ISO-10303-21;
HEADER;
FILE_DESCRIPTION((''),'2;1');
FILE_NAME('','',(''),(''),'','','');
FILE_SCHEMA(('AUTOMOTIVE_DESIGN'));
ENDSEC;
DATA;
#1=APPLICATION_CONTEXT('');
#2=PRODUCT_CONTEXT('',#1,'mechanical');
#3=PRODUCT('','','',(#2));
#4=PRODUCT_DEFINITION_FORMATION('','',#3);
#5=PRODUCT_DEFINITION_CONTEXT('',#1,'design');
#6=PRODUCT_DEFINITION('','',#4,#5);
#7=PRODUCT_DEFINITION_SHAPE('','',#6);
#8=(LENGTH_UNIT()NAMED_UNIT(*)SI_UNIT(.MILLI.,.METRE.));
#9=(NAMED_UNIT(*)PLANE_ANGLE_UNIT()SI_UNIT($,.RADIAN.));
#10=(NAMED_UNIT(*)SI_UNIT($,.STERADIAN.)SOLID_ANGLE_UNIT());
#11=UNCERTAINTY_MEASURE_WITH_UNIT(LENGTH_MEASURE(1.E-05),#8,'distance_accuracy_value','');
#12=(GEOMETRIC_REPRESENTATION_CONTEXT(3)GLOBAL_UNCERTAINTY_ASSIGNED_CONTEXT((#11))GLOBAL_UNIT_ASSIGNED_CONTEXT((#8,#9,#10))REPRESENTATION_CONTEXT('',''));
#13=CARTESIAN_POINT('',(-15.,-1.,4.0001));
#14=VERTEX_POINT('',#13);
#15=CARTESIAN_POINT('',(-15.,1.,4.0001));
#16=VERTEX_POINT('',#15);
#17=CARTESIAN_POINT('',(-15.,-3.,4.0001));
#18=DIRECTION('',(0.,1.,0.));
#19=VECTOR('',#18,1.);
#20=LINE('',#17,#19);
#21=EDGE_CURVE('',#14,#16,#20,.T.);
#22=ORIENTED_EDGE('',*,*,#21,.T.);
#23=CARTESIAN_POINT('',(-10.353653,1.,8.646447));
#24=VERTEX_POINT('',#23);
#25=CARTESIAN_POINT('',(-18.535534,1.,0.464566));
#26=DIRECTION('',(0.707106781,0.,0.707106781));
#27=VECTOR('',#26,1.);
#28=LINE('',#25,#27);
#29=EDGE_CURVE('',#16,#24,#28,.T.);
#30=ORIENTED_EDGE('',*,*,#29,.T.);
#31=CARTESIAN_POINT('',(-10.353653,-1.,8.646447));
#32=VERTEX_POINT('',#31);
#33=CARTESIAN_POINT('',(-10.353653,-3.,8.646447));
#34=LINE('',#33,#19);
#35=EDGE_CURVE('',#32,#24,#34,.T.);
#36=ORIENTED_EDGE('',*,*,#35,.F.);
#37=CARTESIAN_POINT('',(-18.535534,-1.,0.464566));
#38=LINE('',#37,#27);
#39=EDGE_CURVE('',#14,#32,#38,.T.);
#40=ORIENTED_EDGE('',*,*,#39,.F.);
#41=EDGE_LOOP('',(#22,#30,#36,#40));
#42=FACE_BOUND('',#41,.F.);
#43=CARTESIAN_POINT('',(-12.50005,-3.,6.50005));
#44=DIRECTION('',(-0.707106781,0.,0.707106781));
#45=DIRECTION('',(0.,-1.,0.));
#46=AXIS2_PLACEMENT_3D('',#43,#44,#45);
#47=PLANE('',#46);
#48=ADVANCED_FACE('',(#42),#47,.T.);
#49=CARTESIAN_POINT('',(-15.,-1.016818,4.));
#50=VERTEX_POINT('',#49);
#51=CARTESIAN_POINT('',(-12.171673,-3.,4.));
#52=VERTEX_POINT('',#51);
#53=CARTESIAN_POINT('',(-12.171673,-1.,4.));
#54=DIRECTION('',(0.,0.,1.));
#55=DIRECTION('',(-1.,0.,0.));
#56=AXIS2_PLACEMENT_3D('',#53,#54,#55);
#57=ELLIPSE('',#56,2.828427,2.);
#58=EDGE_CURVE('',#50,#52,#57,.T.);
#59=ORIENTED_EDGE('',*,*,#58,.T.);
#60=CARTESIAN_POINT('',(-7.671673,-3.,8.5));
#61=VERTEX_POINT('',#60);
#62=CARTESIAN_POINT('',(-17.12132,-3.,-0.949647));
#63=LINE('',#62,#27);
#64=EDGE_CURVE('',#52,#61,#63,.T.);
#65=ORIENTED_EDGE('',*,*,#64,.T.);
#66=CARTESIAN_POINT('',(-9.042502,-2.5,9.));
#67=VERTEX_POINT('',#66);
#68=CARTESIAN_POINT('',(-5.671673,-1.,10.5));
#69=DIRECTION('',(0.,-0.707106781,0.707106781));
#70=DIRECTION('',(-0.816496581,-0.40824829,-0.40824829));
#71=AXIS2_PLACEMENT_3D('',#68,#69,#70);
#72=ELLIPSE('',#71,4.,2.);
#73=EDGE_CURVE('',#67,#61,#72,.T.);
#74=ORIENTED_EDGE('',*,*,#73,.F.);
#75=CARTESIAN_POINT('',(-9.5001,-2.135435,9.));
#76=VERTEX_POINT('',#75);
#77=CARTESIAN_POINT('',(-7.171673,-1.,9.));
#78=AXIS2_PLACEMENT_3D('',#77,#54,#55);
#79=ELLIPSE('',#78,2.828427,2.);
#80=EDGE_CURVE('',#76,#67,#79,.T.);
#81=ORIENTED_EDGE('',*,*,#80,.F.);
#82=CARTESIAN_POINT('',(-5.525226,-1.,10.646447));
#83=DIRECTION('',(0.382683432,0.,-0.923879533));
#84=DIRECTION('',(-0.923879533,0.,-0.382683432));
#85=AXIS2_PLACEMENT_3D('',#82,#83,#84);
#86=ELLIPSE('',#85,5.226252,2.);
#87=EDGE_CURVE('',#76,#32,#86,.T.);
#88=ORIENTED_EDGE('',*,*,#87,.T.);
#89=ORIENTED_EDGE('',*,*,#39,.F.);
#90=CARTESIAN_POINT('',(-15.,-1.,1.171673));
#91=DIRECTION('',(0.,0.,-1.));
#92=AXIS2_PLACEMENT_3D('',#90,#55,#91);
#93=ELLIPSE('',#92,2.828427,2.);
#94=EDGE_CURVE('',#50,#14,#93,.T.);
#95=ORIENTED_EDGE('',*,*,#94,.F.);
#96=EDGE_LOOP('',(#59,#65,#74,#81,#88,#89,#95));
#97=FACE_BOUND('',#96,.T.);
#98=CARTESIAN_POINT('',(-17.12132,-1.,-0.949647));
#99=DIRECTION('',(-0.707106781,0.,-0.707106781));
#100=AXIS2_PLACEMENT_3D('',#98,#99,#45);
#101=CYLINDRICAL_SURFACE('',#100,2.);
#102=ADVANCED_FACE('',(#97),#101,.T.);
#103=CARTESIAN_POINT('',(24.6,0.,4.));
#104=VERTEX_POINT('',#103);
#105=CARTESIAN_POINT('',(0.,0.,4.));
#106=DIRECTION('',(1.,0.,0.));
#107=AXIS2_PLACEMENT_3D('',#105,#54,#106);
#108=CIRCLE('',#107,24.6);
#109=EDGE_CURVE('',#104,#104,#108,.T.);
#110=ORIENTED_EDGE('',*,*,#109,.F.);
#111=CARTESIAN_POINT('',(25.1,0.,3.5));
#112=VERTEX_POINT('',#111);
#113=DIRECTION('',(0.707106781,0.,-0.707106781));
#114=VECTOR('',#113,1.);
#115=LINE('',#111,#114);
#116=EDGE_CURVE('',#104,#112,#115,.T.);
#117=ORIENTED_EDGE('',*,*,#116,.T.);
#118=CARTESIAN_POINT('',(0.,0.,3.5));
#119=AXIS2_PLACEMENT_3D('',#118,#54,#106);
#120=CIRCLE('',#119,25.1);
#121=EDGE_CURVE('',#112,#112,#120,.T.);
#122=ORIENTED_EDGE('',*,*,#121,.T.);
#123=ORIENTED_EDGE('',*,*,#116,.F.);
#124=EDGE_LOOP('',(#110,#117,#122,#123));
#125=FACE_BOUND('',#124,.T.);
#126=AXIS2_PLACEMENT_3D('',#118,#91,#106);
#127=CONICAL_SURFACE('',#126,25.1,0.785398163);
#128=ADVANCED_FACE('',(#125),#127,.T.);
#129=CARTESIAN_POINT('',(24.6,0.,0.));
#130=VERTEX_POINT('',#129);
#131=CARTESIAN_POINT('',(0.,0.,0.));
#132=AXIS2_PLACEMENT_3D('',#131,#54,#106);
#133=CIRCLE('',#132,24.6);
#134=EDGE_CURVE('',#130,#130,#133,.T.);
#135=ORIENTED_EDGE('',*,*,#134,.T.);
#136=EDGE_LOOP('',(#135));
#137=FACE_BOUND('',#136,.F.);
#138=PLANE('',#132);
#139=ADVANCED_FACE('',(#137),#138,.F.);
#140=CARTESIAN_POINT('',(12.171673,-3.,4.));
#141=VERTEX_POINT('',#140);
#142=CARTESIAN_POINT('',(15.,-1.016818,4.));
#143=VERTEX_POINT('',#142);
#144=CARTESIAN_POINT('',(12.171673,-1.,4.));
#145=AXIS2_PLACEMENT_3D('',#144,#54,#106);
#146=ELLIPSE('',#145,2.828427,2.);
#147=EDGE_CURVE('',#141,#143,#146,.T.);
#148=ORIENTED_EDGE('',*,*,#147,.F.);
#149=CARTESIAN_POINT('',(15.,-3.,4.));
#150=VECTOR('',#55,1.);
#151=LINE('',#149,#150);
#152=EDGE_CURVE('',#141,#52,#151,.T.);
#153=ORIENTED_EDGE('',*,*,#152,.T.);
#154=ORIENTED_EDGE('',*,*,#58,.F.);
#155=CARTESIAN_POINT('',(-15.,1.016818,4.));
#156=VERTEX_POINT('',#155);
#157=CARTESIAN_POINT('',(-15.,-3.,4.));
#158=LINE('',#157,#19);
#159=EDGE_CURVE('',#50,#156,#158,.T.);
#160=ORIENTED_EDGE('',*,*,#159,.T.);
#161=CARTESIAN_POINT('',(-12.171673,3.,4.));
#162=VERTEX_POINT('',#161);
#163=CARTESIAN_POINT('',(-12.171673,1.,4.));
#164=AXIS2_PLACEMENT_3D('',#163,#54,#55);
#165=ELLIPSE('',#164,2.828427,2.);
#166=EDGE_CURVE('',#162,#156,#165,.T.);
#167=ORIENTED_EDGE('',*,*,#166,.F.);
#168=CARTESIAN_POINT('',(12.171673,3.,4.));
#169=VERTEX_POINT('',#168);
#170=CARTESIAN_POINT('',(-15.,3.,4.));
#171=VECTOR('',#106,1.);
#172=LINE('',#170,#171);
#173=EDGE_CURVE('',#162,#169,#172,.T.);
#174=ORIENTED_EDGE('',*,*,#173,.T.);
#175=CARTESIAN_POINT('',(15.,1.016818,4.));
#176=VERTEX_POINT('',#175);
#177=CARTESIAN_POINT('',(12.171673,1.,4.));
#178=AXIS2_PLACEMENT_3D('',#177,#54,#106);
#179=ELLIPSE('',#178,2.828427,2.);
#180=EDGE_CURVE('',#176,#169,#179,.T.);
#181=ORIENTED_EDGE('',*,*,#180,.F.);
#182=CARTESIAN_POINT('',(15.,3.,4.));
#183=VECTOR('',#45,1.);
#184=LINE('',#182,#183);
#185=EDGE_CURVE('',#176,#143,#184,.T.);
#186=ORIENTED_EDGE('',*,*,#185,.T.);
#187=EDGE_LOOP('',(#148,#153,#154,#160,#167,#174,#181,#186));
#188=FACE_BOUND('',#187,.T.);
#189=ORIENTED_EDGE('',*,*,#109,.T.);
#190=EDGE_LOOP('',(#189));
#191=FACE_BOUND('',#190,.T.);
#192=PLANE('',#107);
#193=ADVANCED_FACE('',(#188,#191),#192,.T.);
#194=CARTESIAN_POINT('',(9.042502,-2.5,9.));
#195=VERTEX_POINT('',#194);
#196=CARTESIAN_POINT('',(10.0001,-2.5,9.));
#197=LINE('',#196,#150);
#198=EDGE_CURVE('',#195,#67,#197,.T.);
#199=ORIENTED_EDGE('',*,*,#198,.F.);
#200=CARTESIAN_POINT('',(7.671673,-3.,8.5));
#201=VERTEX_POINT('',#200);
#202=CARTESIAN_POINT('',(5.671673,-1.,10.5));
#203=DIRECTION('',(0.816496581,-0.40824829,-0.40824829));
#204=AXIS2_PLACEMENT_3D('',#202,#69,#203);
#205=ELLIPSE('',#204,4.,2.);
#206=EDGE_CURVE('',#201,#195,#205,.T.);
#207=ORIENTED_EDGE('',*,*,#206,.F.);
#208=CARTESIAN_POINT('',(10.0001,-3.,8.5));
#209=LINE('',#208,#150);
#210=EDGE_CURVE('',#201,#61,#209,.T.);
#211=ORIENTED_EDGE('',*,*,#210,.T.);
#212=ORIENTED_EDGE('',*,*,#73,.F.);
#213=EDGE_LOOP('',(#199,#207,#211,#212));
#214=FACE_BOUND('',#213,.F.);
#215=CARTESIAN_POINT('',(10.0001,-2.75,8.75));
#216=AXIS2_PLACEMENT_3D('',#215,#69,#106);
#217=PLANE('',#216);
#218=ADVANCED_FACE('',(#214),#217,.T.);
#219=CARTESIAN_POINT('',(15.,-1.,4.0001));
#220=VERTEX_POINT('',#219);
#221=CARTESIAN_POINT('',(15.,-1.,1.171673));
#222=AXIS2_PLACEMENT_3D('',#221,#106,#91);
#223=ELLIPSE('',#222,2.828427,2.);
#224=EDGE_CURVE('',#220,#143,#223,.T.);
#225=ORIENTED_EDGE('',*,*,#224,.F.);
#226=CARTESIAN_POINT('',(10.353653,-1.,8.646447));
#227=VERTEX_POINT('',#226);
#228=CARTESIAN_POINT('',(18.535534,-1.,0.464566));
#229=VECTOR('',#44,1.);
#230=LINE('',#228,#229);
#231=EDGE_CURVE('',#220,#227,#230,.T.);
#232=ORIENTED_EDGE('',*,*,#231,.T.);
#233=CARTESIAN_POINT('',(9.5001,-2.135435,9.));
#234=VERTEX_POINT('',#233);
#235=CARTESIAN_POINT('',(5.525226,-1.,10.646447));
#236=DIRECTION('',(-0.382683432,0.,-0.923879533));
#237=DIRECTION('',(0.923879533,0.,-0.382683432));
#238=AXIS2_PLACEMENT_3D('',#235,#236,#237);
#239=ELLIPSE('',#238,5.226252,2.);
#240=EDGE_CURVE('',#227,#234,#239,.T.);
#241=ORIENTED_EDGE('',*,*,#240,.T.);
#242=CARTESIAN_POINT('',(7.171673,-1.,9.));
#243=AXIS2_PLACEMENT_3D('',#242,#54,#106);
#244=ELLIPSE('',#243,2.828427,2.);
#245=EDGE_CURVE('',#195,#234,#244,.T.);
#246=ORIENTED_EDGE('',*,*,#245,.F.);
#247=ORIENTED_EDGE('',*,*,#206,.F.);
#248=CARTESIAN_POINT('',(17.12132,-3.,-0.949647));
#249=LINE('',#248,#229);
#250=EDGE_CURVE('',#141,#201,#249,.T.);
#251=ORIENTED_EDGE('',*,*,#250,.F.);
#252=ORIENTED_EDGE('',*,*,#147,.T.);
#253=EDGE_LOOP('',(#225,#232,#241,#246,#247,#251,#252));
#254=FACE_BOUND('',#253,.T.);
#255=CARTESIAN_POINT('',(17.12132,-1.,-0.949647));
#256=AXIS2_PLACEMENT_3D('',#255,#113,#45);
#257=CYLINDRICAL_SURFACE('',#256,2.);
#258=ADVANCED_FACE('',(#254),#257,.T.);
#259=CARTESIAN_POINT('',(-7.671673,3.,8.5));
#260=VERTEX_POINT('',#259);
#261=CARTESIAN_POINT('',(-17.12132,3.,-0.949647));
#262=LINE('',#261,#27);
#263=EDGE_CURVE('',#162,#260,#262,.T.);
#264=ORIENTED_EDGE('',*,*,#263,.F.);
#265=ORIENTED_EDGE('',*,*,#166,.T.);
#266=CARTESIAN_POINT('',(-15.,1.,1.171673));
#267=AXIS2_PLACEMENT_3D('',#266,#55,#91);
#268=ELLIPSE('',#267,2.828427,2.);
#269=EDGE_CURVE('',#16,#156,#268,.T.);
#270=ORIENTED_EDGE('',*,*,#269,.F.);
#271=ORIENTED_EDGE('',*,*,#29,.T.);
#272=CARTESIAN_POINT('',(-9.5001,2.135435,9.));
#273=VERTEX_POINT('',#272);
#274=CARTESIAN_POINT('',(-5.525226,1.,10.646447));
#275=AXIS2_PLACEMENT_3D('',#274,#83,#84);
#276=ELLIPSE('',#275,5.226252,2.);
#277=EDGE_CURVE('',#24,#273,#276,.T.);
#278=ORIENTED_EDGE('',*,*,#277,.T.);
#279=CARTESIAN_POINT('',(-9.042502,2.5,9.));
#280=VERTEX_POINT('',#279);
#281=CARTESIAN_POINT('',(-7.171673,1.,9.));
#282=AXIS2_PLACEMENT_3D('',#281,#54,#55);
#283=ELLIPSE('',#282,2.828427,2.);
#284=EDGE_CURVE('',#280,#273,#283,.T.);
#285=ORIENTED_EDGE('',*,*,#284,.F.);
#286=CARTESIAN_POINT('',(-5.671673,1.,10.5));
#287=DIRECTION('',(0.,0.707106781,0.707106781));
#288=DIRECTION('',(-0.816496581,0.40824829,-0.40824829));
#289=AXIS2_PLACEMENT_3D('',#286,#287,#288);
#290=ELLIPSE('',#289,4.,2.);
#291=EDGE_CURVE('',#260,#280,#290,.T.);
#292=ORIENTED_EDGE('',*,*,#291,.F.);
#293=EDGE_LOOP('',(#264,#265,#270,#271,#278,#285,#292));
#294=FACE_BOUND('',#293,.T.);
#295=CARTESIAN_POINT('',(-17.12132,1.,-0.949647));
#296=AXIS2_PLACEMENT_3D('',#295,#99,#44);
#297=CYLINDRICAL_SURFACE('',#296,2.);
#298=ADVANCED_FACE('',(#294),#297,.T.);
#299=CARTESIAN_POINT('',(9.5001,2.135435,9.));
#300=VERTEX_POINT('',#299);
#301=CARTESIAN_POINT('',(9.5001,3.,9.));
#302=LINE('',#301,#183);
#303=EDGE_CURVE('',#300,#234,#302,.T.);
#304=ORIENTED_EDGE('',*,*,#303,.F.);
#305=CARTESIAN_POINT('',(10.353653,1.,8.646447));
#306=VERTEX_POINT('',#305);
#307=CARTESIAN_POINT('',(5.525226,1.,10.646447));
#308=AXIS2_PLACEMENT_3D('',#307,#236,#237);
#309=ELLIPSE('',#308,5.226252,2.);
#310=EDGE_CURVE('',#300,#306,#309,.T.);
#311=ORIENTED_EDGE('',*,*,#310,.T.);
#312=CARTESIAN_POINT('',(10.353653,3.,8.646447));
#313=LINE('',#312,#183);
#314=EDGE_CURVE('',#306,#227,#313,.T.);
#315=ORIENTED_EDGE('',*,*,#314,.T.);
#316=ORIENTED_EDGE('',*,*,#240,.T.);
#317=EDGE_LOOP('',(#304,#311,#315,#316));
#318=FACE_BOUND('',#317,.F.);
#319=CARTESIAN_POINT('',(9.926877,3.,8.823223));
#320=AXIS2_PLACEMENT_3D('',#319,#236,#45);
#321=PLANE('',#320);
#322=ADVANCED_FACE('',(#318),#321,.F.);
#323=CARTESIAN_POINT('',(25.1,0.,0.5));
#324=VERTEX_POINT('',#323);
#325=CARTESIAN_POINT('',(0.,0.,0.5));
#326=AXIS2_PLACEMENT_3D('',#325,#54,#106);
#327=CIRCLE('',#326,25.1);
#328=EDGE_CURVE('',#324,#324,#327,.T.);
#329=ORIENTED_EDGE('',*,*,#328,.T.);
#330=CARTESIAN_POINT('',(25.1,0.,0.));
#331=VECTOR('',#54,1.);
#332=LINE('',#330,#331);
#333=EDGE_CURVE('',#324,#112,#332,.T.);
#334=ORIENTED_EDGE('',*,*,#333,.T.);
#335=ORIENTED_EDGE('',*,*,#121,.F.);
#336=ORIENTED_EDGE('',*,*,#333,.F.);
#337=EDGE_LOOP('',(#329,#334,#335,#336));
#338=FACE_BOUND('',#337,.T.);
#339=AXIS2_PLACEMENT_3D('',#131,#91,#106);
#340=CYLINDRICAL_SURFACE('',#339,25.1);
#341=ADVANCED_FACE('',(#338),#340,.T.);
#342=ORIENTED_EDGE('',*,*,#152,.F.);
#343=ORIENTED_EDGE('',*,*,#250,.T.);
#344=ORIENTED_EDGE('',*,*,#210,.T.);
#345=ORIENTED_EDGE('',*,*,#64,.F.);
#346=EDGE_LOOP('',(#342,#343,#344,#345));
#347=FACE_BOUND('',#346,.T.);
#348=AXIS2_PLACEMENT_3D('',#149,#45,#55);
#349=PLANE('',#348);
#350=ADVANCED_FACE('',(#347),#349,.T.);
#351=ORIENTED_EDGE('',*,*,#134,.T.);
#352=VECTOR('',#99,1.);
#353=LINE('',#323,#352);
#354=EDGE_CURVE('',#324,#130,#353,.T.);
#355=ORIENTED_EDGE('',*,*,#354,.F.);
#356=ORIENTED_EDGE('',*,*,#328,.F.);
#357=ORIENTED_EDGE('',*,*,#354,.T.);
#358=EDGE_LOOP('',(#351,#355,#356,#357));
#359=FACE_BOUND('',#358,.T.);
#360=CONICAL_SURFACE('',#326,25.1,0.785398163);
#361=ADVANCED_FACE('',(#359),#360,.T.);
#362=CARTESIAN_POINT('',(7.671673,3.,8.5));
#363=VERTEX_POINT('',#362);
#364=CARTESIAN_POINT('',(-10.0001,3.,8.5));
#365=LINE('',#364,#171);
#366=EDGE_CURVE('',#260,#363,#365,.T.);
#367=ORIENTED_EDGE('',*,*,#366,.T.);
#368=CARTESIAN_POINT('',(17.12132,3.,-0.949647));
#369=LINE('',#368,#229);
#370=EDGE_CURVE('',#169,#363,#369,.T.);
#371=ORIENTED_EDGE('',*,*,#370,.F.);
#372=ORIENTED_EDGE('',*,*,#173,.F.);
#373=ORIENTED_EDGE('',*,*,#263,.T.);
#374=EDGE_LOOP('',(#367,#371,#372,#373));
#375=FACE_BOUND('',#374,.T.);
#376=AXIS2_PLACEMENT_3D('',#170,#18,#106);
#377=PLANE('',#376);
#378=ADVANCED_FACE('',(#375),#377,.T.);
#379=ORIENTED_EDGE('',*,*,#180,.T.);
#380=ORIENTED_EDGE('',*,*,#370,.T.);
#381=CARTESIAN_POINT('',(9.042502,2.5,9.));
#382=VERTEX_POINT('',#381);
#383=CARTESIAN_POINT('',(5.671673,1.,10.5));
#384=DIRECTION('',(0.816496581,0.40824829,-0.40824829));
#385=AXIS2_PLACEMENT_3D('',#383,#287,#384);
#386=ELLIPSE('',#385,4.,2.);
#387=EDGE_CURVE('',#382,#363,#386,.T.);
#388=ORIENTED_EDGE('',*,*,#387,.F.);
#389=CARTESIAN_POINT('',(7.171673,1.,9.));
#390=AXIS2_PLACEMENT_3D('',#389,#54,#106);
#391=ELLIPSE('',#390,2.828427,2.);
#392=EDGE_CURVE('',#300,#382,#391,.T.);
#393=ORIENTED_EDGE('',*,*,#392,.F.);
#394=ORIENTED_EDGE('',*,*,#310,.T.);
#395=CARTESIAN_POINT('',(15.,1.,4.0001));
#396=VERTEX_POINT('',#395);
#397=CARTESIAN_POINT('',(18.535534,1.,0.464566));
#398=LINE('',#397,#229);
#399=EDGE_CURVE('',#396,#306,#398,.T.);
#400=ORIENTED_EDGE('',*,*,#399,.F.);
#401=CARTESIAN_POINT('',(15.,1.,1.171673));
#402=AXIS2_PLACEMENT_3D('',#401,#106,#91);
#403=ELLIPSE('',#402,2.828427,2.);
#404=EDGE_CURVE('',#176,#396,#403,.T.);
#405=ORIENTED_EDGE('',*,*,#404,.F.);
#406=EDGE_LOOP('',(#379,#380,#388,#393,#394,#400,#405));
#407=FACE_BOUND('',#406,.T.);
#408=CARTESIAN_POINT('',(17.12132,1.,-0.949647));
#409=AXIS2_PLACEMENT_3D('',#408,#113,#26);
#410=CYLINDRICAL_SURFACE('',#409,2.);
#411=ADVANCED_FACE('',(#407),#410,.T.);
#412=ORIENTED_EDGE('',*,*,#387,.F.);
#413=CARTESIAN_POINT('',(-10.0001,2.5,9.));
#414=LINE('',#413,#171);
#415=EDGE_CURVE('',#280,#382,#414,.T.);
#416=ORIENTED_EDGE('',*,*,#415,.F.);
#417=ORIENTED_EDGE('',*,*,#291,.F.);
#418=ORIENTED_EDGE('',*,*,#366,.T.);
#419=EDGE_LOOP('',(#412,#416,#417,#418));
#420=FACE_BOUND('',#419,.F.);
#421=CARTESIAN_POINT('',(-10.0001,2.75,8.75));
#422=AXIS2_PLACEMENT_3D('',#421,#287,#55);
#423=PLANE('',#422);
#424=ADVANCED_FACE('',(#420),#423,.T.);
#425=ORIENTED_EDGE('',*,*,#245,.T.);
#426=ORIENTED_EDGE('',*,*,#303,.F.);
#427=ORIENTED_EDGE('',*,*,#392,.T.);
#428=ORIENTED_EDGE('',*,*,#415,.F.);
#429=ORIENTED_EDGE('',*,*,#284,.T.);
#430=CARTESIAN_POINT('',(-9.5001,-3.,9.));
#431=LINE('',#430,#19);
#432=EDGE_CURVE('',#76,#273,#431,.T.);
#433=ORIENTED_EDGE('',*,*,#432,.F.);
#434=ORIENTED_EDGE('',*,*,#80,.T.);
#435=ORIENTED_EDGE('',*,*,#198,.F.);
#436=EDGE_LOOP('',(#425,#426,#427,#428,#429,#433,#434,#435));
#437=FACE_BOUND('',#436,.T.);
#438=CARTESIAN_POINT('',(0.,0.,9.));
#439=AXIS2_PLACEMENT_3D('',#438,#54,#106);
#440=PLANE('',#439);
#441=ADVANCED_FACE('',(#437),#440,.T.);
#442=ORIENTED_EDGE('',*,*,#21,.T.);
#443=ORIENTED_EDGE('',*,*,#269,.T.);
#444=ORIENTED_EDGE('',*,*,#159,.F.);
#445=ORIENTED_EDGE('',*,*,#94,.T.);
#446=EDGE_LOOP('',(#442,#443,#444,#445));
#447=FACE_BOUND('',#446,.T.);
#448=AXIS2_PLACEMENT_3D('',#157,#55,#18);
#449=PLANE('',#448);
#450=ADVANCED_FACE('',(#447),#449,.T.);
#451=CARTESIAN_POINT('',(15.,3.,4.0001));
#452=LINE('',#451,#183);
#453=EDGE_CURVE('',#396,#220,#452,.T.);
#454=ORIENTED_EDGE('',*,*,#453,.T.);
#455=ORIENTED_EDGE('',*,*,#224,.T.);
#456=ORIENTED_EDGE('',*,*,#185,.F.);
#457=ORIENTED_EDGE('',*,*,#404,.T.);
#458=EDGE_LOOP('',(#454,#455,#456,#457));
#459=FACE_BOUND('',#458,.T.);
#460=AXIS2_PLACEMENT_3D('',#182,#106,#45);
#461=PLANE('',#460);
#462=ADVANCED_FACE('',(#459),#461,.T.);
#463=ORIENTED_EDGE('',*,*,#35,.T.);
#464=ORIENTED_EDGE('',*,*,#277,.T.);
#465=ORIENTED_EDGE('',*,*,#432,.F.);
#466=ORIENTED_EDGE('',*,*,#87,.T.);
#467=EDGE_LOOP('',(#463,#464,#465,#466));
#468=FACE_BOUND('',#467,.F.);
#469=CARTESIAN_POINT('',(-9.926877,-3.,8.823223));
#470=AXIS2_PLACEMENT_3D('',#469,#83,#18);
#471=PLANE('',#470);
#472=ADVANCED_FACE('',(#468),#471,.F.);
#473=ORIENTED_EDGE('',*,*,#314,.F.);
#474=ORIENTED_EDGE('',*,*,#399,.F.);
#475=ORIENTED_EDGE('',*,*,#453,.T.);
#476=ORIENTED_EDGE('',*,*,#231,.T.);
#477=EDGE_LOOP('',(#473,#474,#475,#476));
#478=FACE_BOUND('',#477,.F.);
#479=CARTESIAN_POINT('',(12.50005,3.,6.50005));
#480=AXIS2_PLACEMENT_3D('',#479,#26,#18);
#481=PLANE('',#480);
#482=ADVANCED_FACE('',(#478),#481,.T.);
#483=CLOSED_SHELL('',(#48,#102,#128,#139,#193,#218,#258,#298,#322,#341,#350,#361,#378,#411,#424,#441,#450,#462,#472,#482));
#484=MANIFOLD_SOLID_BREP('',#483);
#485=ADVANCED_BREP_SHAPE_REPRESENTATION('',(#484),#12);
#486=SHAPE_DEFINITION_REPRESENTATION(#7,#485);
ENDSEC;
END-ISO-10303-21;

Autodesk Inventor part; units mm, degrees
ref_plane "YZ Plane" through (0, 0, 0) normal (1, 0, 0) x (0, 1, 0)
ref_plane "XZ Plane" through (0, 0, 0) normal (0, 1, 0) x (-1, 0, 0)
ref_plane "XY Plane" through (0, 0, 0) normal (0, 0, 1) x (1, 0, 0)
sketch "Sketch1" plane through (0, 0, 0) normal (0, 0, 1) x (1, 0, 0)
  circle A0 centre (0, 0) radius 25.1
  dimension "d0" = 50.2
extrude "Extrusion1" add sketch "Sketch1" along normal blind 4
sketch "Sketch2" plane through (0, 0, 4) normal (0, 0, 1) x (1, 0, 0)
  line L0 (-15, 3) -> (15, 3)
  line L1 (15, 3) -> (15, -3)
  line L2 (15, -3) -> (-15, -3)
  line L3 (-15, -3) -> (-15, 3)
  point P0 (0, 0)
  point P1 (15, 0)
  point P2 (0, 3)
  dimension "d3" = 30
  dimension "d4" = 6
extrude "Extrusion2" add sketch "Sketch2" along normal blind 5
chamfer "Chamfer1" distance 5 angle 45 2 edges at (15, 0, 9) (-15, 0, 9)
chamfer "Chamfer2" distance 0.5 angle 45 6 edges at (0, -3, 9) (-10.0001, 0, 9) (0, 3, 9) (10.0001, 0, 9) (-25.1, 0, 4) (-25.1, 0, 0)
fillet "Fillet2" radius 2 4 edges at (-12.7501, -3, 6.25) (-12.75, 3, 6.25) (12.75, -3, 6.25) (12.7501, 3, 6.2501)
properties part number "Sensor-Cap" material "ABS Plastic"
